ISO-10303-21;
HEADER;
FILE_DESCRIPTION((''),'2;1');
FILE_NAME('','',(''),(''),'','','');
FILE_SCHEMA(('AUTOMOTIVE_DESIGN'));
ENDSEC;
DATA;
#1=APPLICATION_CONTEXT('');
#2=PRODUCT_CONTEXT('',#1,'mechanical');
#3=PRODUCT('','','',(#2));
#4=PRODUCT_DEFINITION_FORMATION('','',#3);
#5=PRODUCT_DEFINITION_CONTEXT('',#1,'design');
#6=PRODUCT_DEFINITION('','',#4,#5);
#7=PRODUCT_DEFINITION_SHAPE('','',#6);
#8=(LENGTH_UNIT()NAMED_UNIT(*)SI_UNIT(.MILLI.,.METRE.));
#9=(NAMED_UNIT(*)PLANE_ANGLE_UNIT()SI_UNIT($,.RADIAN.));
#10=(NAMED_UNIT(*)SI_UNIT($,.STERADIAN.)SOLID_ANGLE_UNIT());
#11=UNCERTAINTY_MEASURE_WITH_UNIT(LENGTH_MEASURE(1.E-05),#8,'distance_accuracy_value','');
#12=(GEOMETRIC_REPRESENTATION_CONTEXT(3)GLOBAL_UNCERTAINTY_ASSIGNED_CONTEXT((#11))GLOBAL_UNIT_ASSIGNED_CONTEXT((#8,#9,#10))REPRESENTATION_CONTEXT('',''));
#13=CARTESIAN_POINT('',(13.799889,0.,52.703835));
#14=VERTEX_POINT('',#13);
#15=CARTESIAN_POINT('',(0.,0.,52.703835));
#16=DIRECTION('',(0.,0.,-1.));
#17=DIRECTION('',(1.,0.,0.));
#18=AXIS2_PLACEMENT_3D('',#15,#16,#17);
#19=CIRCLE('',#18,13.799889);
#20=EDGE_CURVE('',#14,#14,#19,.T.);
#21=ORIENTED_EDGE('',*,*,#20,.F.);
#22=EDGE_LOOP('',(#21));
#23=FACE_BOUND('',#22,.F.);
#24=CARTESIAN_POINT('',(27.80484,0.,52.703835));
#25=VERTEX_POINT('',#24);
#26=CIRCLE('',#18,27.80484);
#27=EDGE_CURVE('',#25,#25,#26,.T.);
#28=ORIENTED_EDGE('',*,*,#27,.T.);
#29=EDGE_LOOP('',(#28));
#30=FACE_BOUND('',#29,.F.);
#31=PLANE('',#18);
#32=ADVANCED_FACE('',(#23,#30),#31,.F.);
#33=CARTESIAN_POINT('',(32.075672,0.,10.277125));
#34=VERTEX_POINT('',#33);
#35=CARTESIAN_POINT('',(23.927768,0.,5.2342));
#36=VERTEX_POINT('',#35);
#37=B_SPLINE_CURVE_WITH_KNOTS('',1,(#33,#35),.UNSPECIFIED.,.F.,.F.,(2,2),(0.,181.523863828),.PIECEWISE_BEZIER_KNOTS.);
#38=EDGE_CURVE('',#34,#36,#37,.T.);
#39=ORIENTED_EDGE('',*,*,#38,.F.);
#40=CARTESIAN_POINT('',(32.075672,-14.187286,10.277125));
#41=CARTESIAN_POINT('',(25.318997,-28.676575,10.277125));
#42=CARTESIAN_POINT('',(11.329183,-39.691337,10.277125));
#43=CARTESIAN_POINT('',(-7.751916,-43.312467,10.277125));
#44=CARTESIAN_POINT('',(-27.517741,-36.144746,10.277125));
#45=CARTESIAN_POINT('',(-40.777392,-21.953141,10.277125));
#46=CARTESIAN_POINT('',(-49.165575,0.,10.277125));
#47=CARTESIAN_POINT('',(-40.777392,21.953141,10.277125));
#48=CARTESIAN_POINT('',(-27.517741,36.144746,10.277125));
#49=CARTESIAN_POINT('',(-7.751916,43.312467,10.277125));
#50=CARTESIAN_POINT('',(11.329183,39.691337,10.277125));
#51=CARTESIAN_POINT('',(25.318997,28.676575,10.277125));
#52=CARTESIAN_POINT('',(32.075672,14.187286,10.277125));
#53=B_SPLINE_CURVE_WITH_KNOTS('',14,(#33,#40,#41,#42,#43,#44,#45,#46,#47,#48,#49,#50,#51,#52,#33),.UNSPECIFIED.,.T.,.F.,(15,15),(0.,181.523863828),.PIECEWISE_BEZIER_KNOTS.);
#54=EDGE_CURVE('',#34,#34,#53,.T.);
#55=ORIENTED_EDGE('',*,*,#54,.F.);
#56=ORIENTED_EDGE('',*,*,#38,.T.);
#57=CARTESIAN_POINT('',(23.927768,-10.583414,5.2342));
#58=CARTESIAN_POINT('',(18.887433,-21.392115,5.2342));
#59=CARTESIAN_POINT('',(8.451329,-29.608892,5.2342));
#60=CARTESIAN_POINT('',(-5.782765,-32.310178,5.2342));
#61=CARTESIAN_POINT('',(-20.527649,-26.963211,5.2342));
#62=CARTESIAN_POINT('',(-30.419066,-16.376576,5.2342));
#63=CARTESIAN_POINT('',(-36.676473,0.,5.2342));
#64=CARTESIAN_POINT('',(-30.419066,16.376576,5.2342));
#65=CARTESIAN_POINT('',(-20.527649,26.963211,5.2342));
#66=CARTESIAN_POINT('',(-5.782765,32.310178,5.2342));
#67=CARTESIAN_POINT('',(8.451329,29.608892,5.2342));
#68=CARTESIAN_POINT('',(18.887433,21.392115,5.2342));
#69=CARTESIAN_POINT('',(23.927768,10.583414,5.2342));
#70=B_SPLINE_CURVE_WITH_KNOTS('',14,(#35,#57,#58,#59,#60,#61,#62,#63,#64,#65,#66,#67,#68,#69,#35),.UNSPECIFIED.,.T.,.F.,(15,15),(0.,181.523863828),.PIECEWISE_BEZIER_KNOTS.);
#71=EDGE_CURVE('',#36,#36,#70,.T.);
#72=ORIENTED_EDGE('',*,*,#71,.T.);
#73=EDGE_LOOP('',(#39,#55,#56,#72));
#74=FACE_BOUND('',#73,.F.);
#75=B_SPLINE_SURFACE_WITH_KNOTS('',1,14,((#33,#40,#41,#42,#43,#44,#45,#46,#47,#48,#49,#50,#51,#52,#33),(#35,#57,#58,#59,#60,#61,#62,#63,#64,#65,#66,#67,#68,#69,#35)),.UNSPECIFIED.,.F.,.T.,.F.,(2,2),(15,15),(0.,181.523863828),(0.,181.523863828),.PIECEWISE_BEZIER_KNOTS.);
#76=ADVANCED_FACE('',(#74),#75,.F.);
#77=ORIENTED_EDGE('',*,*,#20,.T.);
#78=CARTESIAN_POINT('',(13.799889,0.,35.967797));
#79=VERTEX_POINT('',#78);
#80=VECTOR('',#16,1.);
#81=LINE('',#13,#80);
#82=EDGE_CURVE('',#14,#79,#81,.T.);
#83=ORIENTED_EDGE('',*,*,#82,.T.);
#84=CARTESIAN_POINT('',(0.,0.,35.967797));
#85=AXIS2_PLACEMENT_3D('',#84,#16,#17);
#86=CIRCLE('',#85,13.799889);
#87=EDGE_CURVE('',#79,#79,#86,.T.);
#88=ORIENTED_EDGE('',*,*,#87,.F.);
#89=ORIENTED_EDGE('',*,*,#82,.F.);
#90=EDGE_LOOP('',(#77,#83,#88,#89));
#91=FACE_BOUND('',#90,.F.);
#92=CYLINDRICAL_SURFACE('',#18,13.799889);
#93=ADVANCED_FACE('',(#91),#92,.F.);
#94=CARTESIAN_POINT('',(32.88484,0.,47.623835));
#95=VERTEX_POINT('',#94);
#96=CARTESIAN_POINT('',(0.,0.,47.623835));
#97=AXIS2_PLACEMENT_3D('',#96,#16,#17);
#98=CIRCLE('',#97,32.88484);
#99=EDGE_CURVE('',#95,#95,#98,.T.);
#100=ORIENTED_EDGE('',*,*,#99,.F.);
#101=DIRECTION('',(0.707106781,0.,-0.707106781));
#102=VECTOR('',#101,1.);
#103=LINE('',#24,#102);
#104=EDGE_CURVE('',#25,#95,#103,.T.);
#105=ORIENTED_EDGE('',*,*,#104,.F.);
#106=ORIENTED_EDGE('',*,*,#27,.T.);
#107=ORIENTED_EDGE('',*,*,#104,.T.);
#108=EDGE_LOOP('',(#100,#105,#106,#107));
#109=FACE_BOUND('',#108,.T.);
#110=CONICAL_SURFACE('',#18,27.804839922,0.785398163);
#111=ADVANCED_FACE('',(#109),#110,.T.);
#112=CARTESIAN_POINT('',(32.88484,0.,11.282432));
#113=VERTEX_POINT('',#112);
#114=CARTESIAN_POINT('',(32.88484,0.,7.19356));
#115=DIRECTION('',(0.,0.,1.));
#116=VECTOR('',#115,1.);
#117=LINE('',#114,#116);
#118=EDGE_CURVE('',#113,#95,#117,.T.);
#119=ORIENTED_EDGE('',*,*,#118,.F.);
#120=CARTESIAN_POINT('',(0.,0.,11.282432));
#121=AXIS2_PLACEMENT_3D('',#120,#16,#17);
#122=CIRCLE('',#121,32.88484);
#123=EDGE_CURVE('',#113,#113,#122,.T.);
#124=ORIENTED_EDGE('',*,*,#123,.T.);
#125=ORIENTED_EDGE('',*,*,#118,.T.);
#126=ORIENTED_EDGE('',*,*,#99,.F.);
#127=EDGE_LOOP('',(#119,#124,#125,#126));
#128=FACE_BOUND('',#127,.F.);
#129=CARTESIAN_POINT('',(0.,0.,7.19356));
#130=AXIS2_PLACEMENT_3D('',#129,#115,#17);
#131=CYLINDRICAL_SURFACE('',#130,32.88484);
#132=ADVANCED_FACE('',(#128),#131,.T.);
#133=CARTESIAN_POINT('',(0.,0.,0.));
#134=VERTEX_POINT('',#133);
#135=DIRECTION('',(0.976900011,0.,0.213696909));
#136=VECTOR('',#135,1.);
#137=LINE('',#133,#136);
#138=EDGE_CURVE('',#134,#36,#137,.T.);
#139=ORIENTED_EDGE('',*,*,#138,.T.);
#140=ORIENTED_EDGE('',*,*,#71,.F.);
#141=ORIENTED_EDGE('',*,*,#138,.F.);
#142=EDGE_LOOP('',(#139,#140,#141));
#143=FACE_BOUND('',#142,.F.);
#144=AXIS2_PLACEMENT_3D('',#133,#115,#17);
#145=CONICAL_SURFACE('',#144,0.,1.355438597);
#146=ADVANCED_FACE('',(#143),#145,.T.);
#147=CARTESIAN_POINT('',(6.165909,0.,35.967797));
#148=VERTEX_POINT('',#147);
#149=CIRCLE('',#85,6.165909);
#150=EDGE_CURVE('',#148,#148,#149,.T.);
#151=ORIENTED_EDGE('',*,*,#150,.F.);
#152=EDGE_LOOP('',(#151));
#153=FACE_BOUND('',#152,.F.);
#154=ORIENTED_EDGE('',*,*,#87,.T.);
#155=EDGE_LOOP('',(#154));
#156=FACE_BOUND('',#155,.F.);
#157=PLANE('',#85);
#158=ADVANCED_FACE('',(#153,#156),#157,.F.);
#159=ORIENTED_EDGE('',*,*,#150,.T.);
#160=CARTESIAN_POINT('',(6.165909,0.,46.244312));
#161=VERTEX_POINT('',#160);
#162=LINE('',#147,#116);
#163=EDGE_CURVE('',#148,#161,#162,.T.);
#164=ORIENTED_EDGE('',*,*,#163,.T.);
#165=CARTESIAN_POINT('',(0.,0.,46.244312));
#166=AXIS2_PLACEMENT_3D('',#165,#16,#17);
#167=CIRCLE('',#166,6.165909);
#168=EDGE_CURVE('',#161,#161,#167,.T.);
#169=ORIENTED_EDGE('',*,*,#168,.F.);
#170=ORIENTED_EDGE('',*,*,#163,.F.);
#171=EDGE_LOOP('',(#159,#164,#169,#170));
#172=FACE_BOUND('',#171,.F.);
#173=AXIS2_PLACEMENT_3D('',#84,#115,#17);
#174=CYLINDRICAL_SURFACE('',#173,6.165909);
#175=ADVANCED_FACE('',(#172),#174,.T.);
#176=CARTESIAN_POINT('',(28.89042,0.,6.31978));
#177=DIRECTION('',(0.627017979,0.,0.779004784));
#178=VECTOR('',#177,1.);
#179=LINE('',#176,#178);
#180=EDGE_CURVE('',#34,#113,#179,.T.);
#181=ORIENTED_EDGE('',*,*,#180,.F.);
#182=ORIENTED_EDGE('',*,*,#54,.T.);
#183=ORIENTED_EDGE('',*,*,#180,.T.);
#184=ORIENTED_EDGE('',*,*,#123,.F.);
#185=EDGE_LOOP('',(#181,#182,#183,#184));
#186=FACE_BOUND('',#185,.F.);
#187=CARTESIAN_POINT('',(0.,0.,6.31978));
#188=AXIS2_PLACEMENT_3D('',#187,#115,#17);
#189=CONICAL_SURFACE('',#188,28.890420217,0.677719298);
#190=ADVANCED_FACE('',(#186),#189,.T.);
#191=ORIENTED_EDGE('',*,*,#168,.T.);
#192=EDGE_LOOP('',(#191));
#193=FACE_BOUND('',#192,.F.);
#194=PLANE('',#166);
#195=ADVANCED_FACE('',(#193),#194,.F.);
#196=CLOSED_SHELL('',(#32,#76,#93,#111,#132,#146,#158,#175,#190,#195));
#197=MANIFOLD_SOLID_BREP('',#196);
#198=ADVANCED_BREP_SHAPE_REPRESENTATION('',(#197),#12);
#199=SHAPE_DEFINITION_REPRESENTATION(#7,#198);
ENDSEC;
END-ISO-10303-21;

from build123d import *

# Parameters (mm, degrees)
F3_SIZE = 5.08


# Not quite as in the source:
# - a fillet or chamfer that OpenCascade refuses, or shapes differently, is made with other operations: its cross-section is extruded or revolved along the edge and cut away or added


with BuildPart() as f1:
    # F0 (on Front) → F1 (revolve)
    with BuildSketch(Plane.XZ):
        Polygon((32.8848399222, 52.7038350701), (13.7998890132, 52.7038350701), (13.7998890132, 35.9677970409), (6.1659086496, 35.9677970409), (6.1659086496, 46.2443120778), (0, 46.2443120778), (0, 0), (32.8848399222, 7.1935597807), align=None)
    revolve(axis=Axis((0, 0, 23.1221560389), (0, 0, -1)))

    # F2: chamfer of 5.08 on 3 edges, made by hand

    # F2_s1 → F2_t2 (revolve, cut)
    with BuildSketch(Plane.XZ):
        Polygon((28.8904202174, 6.319780343), (32.8848399222, 11.2824323984), (32.8848399222, 7.1935597807), align=None)
    revolve(axis=Axis((0, 0, 7.1935597807), (0, 0, -1)), mode=Mode.SUBTRACT)

    # F2_s3 → F2_t4 (revolve, cut)
    with BuildSketch(Plane.XZ):
        Polygon((27.8048399222, 52.7038350701), (32.8848399222, 47.6238350701), (32.8848399222, 52.7038350701), align=None)
    revolve(axis=Axis((0, 0, 52.7038350701), (0, 0, -1)), mode=Mode.SUBTRACT)

    # F3
    f3_edges = [f1.edges().sort_by_distance(p)[0] for p in [
        (14.44521, 0, 3.15989),
        (-28.89042, 0, 6.31978),
    ]]
    chamfer(f3_edges, length=F3_SIZE)


solid = f1.part
